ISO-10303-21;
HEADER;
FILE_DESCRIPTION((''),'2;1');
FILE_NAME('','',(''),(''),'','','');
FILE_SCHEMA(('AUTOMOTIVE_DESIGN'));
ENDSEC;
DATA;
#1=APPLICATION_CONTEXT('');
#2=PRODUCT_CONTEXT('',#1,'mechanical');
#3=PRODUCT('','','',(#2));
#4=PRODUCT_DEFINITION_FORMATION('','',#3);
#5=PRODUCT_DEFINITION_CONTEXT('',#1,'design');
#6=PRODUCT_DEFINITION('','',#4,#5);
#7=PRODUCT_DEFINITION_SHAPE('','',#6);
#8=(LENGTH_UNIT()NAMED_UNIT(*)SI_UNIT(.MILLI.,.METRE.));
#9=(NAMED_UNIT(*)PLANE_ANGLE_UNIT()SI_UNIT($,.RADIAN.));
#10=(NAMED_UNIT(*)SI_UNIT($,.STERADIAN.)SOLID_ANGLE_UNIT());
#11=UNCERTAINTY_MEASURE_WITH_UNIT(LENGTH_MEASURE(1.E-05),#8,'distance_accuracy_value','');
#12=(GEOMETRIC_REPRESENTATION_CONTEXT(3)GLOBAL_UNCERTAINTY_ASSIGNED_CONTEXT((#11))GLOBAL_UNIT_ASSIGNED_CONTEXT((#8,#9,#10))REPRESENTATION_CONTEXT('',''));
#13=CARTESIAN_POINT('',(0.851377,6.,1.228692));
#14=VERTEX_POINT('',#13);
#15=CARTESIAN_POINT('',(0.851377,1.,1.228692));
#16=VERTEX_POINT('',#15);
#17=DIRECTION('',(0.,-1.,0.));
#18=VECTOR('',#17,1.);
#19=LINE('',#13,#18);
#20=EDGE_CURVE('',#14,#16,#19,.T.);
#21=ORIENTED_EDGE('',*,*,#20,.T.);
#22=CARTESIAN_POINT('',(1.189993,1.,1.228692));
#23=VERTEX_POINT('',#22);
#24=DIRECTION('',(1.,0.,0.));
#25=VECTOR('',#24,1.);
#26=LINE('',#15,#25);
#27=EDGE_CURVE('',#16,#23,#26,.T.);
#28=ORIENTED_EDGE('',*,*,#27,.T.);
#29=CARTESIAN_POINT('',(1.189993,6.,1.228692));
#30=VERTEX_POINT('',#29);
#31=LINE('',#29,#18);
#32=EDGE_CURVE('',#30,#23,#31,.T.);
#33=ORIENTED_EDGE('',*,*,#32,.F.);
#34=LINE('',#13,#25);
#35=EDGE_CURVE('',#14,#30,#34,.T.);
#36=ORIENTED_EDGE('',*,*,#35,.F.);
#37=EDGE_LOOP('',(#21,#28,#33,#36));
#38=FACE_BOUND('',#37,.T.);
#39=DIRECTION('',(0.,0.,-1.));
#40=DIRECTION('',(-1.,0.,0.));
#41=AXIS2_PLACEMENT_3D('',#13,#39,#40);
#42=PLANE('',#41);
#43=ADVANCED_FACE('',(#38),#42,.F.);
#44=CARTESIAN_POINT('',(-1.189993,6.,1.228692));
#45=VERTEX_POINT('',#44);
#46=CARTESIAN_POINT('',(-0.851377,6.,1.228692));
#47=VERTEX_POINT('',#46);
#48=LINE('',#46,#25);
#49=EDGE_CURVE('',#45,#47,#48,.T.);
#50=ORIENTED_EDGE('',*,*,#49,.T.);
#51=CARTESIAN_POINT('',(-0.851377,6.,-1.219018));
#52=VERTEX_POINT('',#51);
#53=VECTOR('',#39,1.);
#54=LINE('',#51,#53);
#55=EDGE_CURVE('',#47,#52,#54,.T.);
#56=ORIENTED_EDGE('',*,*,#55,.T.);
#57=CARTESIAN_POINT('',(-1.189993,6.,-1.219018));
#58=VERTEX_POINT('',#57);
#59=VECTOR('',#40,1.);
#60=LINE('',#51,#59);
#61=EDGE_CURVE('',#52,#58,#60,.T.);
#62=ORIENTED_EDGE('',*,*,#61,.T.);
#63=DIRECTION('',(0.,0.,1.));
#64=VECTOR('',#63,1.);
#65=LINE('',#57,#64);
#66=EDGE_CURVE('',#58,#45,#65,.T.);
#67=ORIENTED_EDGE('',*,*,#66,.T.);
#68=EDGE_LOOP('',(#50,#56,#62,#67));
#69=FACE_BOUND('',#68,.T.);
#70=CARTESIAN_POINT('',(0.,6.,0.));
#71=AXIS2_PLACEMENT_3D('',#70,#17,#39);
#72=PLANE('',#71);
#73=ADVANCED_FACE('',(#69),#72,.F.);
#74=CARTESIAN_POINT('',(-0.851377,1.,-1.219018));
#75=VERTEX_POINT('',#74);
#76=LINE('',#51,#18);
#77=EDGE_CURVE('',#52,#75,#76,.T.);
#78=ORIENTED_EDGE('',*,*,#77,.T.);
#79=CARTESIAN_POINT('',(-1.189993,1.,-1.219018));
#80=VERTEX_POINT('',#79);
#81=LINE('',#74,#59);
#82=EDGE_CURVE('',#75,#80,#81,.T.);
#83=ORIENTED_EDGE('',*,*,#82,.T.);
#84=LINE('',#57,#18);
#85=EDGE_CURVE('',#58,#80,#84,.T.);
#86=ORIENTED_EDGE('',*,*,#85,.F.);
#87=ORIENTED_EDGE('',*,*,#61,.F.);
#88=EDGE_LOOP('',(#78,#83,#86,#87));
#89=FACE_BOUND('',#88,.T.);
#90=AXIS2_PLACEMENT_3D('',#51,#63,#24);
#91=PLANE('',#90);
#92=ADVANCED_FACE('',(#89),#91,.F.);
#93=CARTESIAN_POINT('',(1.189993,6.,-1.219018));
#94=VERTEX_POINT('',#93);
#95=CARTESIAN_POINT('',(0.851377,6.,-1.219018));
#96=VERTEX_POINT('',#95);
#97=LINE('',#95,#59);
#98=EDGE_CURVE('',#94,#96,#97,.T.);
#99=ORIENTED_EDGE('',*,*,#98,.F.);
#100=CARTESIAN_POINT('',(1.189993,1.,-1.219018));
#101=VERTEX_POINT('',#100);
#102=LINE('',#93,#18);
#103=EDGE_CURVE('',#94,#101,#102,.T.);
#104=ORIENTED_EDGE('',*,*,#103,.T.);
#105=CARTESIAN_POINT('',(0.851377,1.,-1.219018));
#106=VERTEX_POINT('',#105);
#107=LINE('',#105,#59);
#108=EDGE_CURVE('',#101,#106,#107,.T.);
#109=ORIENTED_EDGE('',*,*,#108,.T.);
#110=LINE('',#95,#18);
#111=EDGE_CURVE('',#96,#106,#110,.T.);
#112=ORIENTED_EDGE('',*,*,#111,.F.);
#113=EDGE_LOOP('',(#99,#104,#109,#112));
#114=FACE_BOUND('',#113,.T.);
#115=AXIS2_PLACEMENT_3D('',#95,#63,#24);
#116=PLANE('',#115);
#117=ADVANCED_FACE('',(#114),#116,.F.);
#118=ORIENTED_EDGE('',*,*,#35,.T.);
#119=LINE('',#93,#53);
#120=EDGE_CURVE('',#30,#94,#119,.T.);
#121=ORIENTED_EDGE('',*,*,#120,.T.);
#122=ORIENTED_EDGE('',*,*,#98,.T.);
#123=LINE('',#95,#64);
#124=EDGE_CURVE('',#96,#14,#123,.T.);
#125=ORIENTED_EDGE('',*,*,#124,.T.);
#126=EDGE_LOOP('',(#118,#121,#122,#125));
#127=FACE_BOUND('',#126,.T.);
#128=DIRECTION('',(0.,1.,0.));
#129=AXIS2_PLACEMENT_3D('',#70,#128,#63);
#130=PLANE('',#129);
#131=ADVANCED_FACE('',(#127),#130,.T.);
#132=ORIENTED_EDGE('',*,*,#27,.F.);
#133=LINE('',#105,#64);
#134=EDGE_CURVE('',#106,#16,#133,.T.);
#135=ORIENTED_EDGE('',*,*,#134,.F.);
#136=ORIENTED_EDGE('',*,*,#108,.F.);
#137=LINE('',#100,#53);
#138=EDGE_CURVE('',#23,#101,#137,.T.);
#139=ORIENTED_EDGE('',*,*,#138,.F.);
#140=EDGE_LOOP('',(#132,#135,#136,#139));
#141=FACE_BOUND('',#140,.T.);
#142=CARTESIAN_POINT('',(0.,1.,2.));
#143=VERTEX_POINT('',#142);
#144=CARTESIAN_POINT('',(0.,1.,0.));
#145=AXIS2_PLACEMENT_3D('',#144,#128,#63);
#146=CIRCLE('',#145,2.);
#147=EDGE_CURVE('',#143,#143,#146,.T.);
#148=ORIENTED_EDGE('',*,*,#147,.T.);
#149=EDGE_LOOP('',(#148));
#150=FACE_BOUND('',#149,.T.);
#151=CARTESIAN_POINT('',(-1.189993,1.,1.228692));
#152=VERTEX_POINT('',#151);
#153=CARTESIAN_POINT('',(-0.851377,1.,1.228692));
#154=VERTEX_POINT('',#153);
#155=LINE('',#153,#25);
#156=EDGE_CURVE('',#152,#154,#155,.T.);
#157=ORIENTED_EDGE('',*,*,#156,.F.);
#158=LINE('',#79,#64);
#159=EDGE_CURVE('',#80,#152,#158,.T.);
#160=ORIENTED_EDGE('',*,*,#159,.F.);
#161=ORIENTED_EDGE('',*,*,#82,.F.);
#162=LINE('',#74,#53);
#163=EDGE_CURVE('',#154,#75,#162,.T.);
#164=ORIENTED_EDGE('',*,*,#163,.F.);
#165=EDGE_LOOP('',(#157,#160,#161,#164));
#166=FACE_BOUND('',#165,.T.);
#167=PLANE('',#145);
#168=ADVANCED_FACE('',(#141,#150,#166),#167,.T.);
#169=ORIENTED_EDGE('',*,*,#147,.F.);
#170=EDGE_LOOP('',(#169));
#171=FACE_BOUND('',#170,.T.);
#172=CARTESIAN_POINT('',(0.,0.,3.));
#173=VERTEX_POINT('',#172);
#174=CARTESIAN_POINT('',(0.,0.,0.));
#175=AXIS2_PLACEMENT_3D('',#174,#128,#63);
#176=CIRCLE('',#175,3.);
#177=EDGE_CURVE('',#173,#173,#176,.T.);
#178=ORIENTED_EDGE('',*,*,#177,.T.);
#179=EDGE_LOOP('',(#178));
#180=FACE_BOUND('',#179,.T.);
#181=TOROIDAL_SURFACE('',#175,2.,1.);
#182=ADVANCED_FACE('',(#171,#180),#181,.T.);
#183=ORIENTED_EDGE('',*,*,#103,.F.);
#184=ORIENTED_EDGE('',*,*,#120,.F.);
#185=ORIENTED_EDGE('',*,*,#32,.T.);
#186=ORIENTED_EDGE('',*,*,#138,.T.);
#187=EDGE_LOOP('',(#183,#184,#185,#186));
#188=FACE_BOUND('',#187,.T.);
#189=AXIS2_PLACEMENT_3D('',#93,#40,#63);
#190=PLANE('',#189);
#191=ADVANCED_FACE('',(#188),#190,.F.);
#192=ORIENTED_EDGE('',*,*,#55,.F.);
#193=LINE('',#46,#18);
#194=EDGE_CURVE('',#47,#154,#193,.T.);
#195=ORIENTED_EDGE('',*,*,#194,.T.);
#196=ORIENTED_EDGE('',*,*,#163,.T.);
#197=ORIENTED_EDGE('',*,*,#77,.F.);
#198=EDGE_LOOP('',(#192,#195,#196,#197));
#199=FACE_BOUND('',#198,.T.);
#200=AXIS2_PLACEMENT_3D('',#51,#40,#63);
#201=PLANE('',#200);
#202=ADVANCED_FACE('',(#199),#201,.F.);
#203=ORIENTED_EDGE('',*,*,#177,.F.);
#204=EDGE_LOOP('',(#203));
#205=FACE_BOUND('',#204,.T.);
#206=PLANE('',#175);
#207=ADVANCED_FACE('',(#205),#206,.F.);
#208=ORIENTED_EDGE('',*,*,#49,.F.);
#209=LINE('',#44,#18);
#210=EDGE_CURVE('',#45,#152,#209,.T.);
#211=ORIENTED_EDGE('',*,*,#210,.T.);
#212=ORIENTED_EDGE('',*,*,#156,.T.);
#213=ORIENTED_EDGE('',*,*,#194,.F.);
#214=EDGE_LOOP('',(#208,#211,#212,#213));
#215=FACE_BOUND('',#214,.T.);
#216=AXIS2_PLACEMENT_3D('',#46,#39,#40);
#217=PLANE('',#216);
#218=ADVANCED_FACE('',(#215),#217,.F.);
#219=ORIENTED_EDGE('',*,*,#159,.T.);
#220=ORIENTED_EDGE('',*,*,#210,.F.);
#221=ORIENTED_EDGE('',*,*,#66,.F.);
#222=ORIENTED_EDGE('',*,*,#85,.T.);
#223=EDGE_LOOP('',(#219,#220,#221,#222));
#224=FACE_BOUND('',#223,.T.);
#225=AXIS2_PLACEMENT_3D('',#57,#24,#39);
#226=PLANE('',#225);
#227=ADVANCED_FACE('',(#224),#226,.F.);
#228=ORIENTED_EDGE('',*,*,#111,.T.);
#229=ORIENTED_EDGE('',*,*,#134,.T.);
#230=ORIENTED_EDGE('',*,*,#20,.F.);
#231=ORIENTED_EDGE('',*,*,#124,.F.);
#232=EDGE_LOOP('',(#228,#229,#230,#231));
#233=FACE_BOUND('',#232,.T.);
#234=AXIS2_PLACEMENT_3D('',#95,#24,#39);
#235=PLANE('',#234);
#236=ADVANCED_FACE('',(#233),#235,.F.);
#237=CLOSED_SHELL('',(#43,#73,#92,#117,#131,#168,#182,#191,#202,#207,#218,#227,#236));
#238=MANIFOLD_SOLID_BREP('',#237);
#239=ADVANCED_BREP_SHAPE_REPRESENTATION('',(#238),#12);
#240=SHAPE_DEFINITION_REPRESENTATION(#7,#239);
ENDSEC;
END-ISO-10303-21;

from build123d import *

# Parameters (mm, degrees)
SKETCH1_R           = 3
BOSS_EXTRUDE2_DEPTH = 1
FILLET3_R           = 1
SKETCH4_W           = 0.338616022
SKETCH4_H           = 2.447710107
BOSS_EXTRUDE3_DEPTH = 5


with BuildPart() as part:
    # Sketch1 → Boss-Extrude2 (new body)
    with BuildSketch(Plane(origin=(0, 0, 0), x_dir=(1, 0, 0), z_dir=(0, 1, 0))):
        with Locations(Location((0, 0, 0), (0, 0, 270))):
            Circle(SKETCH1_R)
    extrude(amount=BOSS_EXTRUDE2_DEPTH)

    # Fillet3
    fillet3_edges = [part.edges().sort_by_distance(p)[0] for p in [
        (0, 1, -3),
    ]]
    fillet(fillet3_edges, radius=FILLET3_R - 0.0001)  # a hair under: the kernel refuses the full size

    # Sketch4 → Boss-Extrude3 (add)
    with BuildSketch(Plane(origin=(0, 1, 0), x_dir=(1, 0, 0), z_dir=(0, 1, 0))):
        with Locations((1.02068544, -0.004837371)):
            Rectangle(SKETCH4_W, SKETCH4_H)
        with Locations((-1.02068544, -0.004837371)):
            Rectangle(SKETCH4_W, SKETCH4_H)
    extrude(amount=BOSS_EXTRUDE3_DEPTH)


solid = part.part
